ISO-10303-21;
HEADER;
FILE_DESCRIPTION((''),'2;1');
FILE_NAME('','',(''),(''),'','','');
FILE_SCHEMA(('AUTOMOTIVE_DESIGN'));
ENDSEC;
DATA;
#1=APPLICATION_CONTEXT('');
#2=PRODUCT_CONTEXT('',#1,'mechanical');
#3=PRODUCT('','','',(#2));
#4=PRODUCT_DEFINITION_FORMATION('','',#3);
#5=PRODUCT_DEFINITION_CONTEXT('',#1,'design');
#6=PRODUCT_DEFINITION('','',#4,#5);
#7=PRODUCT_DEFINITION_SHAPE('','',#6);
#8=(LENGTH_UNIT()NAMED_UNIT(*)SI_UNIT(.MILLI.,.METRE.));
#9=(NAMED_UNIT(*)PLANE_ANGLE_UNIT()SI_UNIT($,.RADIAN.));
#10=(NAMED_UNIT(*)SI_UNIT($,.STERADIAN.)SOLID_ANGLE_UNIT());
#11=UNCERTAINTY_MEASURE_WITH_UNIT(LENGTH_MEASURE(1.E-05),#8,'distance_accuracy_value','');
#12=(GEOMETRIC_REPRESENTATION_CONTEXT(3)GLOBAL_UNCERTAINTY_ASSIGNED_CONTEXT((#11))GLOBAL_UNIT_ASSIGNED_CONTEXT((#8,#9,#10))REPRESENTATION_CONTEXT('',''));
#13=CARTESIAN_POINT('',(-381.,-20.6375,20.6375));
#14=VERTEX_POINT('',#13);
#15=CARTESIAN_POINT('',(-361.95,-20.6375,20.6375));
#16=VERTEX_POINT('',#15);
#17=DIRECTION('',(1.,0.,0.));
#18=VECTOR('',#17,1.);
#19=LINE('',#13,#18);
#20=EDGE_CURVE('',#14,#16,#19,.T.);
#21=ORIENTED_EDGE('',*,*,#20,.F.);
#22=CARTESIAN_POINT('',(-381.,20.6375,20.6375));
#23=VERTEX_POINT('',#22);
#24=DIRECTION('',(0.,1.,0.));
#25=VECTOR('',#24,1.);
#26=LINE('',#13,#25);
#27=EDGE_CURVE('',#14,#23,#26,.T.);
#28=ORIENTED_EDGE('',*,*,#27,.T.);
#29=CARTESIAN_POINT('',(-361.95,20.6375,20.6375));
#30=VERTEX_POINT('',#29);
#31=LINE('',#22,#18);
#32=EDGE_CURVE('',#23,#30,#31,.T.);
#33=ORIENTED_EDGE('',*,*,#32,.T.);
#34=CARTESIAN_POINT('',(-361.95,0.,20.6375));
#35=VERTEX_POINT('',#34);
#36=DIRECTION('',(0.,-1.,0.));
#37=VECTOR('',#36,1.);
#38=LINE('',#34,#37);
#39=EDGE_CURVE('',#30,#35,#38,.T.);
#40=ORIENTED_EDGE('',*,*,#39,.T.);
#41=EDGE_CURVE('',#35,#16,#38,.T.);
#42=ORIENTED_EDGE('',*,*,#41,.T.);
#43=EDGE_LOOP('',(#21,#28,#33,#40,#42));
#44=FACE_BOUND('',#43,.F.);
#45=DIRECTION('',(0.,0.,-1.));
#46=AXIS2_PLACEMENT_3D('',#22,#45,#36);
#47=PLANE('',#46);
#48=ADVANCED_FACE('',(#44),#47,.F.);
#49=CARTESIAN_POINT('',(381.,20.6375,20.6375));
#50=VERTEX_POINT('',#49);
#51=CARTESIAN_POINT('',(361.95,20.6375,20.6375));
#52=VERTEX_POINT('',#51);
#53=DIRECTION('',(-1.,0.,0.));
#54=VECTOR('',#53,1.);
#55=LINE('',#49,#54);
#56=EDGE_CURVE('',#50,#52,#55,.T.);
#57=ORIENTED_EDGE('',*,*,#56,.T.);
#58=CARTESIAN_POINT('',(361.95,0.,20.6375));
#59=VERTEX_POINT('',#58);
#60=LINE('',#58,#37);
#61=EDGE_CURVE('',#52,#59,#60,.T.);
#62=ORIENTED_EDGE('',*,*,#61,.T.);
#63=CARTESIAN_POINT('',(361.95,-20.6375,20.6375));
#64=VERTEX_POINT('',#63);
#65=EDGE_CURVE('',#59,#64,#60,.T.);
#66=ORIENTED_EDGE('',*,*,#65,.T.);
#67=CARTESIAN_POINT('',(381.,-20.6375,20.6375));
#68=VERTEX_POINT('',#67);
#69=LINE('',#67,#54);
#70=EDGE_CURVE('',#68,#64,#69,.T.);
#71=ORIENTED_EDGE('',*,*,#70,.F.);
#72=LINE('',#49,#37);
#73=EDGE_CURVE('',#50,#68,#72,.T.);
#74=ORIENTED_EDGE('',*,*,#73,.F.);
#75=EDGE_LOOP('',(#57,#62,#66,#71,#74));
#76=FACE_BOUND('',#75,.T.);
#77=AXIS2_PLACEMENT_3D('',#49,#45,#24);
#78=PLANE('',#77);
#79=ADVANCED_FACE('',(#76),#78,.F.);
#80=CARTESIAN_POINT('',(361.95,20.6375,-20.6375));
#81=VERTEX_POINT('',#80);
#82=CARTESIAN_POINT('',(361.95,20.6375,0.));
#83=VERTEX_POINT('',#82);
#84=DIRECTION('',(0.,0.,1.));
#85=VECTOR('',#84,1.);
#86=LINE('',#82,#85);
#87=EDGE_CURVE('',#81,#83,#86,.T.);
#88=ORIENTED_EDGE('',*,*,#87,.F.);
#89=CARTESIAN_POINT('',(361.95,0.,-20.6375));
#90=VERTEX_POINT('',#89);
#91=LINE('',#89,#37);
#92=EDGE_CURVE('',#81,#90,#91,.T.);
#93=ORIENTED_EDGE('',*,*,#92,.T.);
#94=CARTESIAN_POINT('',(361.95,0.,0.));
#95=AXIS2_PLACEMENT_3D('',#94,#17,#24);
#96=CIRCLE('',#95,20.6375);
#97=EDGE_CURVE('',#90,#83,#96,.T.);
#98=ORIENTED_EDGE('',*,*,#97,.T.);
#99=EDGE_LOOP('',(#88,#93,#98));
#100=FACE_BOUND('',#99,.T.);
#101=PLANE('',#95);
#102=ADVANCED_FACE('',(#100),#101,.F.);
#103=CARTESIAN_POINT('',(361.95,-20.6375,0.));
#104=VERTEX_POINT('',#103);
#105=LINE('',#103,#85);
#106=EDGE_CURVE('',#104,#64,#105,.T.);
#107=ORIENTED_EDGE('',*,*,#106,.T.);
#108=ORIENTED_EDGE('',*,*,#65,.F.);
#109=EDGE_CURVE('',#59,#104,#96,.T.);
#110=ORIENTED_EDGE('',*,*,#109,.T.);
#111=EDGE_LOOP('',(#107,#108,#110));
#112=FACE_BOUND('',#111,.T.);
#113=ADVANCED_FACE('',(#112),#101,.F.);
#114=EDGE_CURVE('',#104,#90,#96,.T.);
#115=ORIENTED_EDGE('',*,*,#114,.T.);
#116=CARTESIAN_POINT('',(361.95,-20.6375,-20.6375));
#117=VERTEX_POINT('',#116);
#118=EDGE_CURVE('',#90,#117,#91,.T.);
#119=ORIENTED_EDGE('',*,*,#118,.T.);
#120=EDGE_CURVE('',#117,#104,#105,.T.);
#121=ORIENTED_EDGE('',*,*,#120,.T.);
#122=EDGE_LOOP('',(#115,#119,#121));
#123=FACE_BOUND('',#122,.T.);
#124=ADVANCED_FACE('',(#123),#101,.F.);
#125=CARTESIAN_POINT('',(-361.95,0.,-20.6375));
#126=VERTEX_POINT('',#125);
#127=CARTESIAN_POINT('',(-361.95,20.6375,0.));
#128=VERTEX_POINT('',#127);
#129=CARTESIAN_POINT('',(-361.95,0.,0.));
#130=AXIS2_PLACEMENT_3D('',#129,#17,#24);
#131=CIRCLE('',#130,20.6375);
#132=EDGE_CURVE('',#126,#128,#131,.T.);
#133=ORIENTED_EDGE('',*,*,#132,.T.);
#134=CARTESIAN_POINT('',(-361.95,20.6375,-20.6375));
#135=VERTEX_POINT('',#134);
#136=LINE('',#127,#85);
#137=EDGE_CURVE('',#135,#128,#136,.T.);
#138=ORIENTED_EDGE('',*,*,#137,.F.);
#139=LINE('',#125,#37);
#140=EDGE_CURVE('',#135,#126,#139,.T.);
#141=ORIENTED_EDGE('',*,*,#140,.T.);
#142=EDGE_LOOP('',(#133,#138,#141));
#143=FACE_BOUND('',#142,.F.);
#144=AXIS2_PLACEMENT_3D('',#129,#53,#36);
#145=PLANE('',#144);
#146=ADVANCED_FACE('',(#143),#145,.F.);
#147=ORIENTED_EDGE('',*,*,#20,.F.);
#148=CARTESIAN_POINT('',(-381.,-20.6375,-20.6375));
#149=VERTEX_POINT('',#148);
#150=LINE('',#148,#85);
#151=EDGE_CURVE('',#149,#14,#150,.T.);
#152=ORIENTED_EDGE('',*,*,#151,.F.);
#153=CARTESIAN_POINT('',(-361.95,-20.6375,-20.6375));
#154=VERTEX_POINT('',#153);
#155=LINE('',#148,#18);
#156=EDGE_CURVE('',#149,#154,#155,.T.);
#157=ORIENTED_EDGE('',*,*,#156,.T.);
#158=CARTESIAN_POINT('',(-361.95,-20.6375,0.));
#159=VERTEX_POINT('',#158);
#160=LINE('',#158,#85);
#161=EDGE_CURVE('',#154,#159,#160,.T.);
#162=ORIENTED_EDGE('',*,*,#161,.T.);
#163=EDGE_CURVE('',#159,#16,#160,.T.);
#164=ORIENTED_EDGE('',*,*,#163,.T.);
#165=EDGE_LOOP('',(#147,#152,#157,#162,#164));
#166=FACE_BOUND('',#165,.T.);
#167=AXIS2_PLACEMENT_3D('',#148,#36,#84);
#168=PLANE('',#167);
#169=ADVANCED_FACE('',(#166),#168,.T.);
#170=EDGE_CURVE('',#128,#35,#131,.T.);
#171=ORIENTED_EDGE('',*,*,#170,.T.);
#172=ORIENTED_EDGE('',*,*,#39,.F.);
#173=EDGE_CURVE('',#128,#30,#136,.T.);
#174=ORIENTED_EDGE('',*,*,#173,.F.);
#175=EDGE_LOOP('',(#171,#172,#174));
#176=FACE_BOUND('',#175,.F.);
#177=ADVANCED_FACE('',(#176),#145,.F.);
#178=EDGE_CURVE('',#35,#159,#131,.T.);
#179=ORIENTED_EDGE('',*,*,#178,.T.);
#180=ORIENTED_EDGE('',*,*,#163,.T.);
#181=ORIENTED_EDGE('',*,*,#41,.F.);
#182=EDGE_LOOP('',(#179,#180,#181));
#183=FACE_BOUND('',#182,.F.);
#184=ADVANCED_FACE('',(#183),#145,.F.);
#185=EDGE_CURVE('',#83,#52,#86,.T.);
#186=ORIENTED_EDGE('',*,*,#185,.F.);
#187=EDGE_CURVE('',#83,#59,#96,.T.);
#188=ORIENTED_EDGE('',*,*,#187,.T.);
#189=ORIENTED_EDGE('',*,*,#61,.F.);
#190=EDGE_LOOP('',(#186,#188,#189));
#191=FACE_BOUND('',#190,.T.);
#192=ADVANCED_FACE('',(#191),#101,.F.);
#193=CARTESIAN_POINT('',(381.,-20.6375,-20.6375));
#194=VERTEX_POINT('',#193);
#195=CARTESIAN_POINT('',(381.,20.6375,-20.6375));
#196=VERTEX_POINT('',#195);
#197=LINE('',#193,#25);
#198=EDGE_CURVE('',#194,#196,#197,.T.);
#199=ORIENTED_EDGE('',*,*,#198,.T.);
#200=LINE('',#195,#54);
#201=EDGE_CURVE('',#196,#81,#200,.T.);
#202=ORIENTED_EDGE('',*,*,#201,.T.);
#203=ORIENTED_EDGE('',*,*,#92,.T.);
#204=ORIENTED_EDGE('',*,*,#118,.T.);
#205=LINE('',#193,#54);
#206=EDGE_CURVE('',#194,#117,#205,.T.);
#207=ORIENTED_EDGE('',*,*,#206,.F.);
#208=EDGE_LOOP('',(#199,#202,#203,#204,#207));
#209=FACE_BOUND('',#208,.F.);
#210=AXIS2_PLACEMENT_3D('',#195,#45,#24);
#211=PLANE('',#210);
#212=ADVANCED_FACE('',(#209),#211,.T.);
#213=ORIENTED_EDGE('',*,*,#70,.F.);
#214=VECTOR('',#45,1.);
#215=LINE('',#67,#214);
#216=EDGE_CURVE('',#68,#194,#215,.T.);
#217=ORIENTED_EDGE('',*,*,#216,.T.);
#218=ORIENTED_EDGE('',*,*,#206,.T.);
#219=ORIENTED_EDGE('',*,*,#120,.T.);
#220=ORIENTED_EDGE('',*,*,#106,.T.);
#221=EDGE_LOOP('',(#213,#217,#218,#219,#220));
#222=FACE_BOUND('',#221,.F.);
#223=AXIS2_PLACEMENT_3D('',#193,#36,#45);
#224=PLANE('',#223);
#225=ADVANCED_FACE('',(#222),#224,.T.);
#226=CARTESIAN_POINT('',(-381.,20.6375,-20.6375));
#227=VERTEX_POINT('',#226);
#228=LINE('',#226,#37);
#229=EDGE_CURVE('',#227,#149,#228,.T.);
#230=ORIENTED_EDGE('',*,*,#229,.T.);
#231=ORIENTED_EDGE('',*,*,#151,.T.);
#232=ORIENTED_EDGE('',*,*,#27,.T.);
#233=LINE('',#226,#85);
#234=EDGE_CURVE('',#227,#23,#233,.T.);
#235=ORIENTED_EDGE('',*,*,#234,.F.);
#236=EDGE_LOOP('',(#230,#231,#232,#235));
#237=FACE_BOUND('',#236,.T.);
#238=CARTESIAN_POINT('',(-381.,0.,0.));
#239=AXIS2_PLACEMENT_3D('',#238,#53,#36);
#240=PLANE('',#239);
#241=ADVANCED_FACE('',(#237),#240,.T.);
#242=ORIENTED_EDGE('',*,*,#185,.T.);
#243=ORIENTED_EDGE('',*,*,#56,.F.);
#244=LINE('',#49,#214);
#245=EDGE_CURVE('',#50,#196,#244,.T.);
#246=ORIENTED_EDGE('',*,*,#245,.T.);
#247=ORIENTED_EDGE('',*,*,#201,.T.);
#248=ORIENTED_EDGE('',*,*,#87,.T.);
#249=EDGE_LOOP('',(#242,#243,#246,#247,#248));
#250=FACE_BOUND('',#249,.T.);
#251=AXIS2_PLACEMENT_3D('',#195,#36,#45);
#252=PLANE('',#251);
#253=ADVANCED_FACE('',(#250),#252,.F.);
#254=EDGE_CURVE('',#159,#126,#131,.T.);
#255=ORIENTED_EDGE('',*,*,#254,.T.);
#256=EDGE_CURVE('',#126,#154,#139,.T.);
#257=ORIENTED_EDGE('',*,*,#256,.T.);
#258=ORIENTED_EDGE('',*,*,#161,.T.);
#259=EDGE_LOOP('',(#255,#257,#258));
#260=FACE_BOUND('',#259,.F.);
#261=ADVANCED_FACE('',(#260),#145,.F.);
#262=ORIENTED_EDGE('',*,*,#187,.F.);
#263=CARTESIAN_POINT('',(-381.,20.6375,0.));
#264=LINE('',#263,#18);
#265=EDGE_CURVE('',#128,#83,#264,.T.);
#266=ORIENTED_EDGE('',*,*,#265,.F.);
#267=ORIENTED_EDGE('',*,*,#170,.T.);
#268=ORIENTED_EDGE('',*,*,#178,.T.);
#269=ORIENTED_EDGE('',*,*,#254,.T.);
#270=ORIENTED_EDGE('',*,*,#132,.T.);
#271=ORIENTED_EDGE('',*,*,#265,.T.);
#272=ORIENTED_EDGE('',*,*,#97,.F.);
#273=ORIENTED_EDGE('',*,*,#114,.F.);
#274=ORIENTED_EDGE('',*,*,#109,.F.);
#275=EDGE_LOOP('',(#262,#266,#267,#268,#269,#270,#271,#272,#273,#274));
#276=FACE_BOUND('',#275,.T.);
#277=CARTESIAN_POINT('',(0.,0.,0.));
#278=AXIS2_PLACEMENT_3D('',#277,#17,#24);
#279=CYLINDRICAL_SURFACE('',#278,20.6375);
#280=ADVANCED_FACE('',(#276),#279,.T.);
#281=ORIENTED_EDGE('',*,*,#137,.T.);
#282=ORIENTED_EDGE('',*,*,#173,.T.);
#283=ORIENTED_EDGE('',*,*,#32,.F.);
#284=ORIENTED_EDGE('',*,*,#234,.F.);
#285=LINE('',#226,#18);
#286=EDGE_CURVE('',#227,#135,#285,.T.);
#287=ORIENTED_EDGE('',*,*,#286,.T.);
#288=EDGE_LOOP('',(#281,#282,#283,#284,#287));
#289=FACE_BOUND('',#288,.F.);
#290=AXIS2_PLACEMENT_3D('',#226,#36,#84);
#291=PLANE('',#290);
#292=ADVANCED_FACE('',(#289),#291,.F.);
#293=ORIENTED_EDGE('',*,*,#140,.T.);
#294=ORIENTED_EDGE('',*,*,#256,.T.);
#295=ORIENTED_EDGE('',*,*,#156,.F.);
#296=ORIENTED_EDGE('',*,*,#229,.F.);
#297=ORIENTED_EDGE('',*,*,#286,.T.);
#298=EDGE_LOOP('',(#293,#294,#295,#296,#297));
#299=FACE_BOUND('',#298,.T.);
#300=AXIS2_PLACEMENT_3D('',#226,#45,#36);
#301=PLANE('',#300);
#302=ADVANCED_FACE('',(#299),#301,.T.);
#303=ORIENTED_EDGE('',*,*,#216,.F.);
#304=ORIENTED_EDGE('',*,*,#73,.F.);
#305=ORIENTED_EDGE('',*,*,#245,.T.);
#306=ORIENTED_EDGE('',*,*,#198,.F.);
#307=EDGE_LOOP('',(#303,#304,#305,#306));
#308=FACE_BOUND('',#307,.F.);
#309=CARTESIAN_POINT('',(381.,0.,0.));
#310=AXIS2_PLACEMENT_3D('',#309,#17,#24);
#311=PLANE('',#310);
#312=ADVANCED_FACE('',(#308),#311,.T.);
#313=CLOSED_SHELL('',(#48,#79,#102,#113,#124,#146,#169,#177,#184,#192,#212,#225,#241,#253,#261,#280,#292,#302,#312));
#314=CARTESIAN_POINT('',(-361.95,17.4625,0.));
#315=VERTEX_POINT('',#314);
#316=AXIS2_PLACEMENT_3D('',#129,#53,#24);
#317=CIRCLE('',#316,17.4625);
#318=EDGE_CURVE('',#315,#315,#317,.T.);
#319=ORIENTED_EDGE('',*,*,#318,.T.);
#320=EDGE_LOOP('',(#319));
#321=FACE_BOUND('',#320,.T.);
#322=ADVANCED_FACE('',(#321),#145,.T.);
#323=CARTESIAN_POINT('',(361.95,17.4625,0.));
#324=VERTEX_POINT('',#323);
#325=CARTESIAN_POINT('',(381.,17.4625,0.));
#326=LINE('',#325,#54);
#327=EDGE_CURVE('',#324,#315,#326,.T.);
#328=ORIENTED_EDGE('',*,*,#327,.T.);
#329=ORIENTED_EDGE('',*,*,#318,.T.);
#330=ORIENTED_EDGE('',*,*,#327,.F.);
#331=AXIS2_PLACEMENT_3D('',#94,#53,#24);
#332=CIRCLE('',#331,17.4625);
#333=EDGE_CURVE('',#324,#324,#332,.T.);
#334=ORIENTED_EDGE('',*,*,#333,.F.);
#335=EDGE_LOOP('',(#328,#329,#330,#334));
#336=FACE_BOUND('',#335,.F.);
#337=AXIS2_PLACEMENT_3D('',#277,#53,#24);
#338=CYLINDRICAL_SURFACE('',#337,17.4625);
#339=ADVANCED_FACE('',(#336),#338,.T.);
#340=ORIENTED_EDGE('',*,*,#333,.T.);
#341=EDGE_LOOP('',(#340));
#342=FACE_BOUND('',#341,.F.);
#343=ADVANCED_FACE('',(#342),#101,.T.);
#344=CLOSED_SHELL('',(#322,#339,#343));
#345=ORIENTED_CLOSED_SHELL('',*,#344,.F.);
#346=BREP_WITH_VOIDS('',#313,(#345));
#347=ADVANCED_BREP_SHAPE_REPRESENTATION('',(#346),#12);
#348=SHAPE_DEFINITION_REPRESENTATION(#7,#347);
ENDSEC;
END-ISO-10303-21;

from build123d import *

# Parameters (mm, degrees)
F0_R     = 20.6375
F0_R_2   = 17.4625
F1_DEPTH = 381
F2_W     = 41.275
F2_H     = 41.275
F3_DEPTH = 19.05


# Not quite as in the source:
# - a pattern or mirror of a feature is missing from the dataset's text; its kind, count and spacing are read off the source's solid


with BuildPart() as f1:
    # F0 (on Right) → F1 (new body, symmetric)
    with BuildSketch(Plane.YZ):
        Circle(F0_R)
        Circle(F0_R_2, mode=Mode.SUBTRACT)
    extrude(amount=F1_DEPTH, both=True)

    # F2 (on face) → F3 (join)
    with BuildSketch(Plane(origin=(-381, 0, 0), x_dir=(0, -1, 0), z_dir=(-1, 0, 0))):
        Rectangle(F2_W, F2_H)
    f3 = extrude(amount=-F3_DEPTH)

    # F3_copies: F3 across plane
    add(f3.mirror(Plane(origin=(0, 0, 0), x_dir=(0, 0, 1), z_dir=(1, 0, 0))))


solid = f1.part
